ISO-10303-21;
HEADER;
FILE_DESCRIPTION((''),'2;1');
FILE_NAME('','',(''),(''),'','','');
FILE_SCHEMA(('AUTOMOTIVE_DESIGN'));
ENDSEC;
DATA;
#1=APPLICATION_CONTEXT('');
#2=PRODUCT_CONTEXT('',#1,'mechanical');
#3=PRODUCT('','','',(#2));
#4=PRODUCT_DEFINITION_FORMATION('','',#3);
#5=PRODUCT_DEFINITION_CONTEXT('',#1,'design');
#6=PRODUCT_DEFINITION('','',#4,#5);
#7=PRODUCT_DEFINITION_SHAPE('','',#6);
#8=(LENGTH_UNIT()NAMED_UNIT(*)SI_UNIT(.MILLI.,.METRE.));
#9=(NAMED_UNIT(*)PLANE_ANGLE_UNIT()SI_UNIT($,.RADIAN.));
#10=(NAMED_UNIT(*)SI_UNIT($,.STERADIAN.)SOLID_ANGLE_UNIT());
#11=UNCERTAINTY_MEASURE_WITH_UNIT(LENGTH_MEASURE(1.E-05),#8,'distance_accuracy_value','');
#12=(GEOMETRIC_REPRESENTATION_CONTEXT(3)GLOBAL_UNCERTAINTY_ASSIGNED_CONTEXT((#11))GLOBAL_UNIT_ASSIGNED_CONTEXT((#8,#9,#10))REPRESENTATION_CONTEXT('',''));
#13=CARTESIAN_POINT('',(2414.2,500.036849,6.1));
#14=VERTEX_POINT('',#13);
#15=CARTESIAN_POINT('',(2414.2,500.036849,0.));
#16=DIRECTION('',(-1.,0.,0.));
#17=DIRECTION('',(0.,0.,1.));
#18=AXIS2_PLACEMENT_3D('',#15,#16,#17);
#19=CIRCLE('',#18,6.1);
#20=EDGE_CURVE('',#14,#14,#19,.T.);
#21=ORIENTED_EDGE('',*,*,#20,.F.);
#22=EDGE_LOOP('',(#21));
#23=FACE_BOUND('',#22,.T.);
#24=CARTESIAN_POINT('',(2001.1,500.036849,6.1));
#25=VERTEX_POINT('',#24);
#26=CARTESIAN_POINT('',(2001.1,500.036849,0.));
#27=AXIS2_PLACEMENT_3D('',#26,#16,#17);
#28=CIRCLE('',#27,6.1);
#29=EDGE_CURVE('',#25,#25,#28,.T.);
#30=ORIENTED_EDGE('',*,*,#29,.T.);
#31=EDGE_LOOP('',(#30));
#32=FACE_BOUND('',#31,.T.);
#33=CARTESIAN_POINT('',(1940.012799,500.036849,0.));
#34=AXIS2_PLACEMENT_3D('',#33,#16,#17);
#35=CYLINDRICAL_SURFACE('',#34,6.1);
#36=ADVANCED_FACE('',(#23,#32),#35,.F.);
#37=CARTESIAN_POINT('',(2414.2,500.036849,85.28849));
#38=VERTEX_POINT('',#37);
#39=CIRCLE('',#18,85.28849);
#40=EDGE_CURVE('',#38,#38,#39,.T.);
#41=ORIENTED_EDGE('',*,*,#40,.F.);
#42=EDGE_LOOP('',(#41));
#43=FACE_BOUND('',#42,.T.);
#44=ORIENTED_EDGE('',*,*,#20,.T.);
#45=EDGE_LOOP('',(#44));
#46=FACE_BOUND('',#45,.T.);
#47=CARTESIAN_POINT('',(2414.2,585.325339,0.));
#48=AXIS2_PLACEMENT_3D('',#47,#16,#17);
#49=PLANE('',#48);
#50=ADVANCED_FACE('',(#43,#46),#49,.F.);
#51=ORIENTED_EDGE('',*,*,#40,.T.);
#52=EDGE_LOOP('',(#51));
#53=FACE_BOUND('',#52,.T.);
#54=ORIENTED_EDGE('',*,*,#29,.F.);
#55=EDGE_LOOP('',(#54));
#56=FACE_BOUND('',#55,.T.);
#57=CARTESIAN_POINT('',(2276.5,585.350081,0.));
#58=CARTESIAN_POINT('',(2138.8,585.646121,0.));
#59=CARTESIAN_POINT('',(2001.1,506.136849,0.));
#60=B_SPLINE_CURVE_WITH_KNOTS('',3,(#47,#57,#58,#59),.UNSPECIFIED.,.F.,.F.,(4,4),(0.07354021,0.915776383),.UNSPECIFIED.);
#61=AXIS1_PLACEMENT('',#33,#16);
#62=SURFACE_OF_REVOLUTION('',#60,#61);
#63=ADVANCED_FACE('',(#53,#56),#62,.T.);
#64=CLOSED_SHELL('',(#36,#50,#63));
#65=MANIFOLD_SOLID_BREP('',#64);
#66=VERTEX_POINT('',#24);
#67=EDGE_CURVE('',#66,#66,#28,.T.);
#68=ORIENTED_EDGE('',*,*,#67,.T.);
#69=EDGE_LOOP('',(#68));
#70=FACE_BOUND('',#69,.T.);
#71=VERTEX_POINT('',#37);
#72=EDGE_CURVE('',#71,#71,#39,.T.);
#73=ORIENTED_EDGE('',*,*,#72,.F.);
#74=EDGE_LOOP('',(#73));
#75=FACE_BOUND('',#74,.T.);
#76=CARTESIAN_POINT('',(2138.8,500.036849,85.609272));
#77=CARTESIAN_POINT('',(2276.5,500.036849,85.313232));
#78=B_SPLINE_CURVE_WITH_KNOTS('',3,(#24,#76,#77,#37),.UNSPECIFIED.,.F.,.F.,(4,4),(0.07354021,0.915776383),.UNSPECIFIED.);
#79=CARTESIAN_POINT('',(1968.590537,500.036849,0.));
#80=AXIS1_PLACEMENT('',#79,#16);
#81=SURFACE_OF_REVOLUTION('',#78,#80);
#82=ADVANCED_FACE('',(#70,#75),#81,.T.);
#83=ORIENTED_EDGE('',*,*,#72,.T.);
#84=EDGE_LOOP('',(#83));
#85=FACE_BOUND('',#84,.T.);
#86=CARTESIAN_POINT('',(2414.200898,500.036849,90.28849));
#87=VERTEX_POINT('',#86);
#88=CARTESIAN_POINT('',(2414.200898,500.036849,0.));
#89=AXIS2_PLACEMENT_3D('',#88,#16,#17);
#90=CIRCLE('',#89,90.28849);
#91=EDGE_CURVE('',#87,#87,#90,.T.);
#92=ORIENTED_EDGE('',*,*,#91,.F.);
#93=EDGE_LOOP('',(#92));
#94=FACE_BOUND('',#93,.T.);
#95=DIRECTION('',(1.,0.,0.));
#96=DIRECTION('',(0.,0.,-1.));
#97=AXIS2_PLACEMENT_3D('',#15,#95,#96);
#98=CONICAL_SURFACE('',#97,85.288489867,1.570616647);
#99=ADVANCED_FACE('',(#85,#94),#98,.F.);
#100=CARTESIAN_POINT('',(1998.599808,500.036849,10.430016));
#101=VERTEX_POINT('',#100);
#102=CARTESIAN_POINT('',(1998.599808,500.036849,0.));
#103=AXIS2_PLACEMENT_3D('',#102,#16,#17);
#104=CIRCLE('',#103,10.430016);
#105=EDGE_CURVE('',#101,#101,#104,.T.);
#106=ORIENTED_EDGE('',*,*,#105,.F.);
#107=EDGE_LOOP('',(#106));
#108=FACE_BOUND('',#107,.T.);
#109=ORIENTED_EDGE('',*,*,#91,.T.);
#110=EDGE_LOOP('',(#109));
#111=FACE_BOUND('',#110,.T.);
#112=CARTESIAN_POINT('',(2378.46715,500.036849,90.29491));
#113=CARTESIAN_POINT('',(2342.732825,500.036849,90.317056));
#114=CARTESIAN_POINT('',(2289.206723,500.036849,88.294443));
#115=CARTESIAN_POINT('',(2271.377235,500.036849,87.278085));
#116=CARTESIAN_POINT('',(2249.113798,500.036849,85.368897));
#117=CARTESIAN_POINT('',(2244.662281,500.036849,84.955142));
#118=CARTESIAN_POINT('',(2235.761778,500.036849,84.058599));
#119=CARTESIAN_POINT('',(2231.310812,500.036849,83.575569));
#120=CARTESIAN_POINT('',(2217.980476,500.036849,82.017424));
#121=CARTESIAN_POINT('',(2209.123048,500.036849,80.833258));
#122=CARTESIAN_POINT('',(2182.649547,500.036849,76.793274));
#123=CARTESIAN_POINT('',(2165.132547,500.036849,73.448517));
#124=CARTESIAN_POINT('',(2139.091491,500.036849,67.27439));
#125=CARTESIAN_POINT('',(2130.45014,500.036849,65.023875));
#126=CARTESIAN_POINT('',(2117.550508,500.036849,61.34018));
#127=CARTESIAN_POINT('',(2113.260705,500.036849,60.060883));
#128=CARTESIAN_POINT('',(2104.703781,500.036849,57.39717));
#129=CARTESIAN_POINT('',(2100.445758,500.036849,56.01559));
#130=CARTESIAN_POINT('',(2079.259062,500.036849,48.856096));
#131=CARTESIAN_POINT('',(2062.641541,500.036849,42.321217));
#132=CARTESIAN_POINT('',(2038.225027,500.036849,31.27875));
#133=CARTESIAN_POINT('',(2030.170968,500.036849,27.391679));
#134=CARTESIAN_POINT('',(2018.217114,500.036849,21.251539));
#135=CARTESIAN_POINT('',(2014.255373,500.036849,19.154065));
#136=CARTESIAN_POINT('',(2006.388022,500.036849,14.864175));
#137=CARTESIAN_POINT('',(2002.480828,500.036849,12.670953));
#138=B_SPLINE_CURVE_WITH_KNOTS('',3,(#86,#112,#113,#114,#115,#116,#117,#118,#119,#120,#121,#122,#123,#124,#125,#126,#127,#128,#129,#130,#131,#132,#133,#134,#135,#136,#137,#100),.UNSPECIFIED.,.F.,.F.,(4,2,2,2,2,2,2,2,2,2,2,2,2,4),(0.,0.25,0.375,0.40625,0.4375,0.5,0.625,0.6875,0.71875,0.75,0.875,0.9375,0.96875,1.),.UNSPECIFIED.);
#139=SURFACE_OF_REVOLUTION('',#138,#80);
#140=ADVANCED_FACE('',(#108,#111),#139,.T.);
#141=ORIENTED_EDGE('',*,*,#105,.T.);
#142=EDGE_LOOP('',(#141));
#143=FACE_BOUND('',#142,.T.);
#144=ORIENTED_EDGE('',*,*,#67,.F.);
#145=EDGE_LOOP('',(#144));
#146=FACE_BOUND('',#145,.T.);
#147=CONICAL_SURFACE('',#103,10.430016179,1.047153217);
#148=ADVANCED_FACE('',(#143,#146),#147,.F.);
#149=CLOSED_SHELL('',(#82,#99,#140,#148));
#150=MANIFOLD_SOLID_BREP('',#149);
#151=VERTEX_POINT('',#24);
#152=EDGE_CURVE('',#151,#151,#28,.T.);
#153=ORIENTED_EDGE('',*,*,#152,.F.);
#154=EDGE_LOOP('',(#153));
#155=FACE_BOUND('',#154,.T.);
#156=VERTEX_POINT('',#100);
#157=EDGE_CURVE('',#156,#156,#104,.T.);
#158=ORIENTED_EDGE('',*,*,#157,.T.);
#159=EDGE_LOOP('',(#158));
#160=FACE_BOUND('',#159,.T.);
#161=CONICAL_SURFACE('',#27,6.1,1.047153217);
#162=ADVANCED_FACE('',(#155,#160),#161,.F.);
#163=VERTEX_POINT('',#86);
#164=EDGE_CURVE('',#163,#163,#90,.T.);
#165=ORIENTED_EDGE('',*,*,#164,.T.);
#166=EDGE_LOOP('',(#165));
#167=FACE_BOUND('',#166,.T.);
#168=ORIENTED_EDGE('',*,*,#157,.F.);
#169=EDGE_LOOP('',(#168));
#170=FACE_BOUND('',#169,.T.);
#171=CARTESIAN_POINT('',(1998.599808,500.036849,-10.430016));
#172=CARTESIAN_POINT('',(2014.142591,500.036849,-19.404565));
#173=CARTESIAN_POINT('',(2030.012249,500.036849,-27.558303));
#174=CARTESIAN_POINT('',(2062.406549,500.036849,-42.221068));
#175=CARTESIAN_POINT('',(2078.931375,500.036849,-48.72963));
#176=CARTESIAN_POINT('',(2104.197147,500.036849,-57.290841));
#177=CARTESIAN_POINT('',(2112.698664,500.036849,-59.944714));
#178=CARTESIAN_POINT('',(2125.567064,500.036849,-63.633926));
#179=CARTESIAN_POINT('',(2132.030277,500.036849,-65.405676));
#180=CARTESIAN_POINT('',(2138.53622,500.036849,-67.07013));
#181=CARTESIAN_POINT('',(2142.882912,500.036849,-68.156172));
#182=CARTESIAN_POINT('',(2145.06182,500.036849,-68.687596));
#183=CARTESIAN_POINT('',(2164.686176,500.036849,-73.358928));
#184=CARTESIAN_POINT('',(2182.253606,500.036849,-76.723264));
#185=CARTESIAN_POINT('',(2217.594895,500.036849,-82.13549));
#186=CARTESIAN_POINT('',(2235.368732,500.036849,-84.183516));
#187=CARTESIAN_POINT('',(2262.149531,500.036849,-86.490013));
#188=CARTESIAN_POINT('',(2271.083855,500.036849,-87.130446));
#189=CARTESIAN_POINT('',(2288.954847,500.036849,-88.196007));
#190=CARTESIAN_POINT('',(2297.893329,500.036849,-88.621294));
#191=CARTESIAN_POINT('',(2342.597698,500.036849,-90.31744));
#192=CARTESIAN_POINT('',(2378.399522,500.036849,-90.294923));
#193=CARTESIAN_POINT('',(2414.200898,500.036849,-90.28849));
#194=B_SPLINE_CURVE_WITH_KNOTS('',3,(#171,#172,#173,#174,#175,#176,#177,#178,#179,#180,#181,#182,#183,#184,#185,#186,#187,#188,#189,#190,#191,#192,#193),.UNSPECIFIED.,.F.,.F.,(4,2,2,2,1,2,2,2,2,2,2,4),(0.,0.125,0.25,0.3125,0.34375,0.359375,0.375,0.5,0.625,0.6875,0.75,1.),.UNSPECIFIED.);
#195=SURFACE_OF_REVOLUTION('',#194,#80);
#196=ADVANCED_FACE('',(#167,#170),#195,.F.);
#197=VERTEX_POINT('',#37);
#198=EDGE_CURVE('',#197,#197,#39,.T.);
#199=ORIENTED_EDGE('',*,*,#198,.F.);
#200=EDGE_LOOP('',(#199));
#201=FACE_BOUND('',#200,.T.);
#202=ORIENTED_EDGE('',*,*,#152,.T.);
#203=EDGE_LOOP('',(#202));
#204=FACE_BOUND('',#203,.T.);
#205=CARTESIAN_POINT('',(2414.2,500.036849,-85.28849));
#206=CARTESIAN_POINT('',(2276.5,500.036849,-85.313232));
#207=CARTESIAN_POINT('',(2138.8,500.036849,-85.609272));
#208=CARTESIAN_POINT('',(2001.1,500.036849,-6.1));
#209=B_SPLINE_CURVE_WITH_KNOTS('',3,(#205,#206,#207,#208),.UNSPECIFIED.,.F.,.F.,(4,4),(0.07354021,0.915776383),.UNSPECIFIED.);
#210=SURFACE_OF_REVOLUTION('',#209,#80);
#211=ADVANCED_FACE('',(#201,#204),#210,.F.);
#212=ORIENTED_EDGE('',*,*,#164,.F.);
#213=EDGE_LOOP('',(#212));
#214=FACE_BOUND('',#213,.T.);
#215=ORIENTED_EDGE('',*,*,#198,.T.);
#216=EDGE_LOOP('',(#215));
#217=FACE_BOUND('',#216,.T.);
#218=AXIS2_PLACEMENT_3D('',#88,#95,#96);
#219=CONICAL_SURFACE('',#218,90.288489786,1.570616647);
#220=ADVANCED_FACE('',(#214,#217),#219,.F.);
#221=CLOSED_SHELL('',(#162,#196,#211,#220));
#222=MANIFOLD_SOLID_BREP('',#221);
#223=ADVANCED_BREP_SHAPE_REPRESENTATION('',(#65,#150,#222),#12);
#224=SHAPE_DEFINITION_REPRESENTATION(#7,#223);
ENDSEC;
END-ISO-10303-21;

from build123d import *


# Read off the part's stored shape, not the designer's step: Rivoluzione2
with BuildPart() as part:
    # Schizzo3 → Rivoluzione1 (revolve)
    with BuildSketch(Plane.XY, mode=Mode.PRIVATE) as rivoluzione1_sk:
        with BuildLine():
            Line((2001.1, 506.136849405), (2414.2, 506.136849405))
            Line((2414.2, 506.136849405), (2414.2, 585.325339272))
            add(Edge.make_bspline(
                [(2001.1, 506.136849405), (2138.8, 585.646121488), (2276.5, 585.350081122), (2414.2, 585.325339272)],
                knots=[0.07354021, 0.07354021, 0.07354021, 0.07354021, 0.915776383, 0.915776383, 0.915776383, 0.915776383], degree=3))
        make_face()
    revolve(rivoluzione1_sk.sketch.rotate(Axis((1940.012799463, 500.036849405, 0), (1, 0, 0)), 90), axis=Axis((1940.012799463, 500.036849405, 0), (1, 0, 0)))


with BuildPart() as body_2:
    # Rivoluzione2 outline → Rivoluzione2 (revolve)
    with BuildSketch(Plane(origin=(0, 500.036849405, 0), x_dir=(0, 1, 0), z_dir=(0, 0, -1))):
        with BuildLine():
            Line((10.430016179, 2001.1), (10.430016179, 1998.599808029))
            add(Edge.make_bspline(
                [(10.430016179, 1998.599808029), (10.910686173, 1999.432267647), (11.389001598, 2000.265664939), (11.864962214, 2001.1)],
                knots=[0, 0, 0, 0, 0.006694905, 0.006694905, 0.006694905, 0.006694905], degree=3))
            Line((11.864962214, 2001.1), (10.430016179, 2001.1))
        make_face()
        Polygon((6.1, 2001.1), (10.430016179, 1998.599808029), (10.430016179, 2001.1), align=None)
        with BuildLine():
            Line((10.430016179, 2001.1), (11.864962214, 2001.1))
            add(Edge.make_bspline(
                [(11.864962214, 2001.1), (20.275621705, 2015.843463757), (27.950965963, 2030.879756216), (42.221068159, 2062.406548595), (48.729629696, 2078.931374991), (57.290840825, 2104.197146895), (59.944713987, 2112.698663775), (63.633925586, 2125.567063857), (65.405676356, 2132.030277364), (67.07013029, 2138.53622029), (68.156172047, 2142.882911625), (68.687595735, 2145.061820389), (73.358927674, 2164.686176447), (76.723264297, 2182.253606336), (81.889168192, 2215.986438927), (83.805224005, 2232.133888963), (85.288489867, 2248.349203732)],
                knots=[0.006694905, 0.006694905, 0.006694905, 0.006694905, 0.125, 0.125, 0.25, 0.25, 0.3125, 0.3125, 0.34375, 0.359375, 0.359375, 0.375, 0.375, 0.5, 0.5, 0.613621976, 0.613621976, 0.613621976, 0.613621976], degree=3))
            Line((85.288489867, 2248.349203732), (85.288489867, 2399.349565938))
            add(Edge.make_bspline(
                [(85.288489867, 2399.349565938), (85.232478335, 2269.146372295), (82.845286707, 2138.943178652), (10.430016179, 2008.739985009)],
                knots=[0.103817559, 0.103817559, 0.103817559, 0.103817559, 0.900199835, 0.900199835, 0.900199835, 0.900199835], degree=3))
            Line((10.430016179, 2008.739985009), (10.430016179, 2001.1))
        make_face()
        with BuildLine():
            add(Edge.make_bspline(
                [(10.430016179, 2008.739985009), (9.013636222, 2006.19332334), (7.570466344, 2003.64666167), (6.1, 2001.1)],
                knots=[0.900199835, 0.900199835, 0.900199835, 0.900199835, 0.915776383, 0.915776383, 0.915776383, 0.915776383], degree=3))
            Line((6.1, 2001.1), (10.430016179, 2001.1))
            Line((10.430016179, 2001.1), (10.430016179, 2008.739985009))
        make_face()
        with BuildLine():
            Line((85.288489867, 2399.349565938), (85.288489867, 2248.349203732))
            add(Edge.make_bspline(
                [(85.288489867, 2248.349203732), (85.437023057, 2249.972993834), (85.581216282, 2251.597464474), (86.490013213, 2262.149531122), (87.130446278, 2271.083855348), (88.19600693, 2288.954846707), (88.621294249, 2297.893329192), (90.132697646, 2337.728557137), (90.27548417, 2368.651513992), (90.288489786, 2399.578076944)],
                knots=[0.613621976, 0.613621976, 0.613621976, 0.613621976, 0.625, 0.625, 0.6875, 0.6875, 0.75, 0.75, 0.965962914, 0.965962914, 0.965962914, 0.965962914], degree=3))
            Line((90.288489786, 2399.578076944), (90.288489786, 2414.2))
            Line((90.288489786, 2414.2), (85.288489867, 2414.2))
            add(Edge.make_bspline(
                [(85.288489867, 2414.2), (85.289379306, 2409.249855313), (85.290619348, 2404.299710625), (85.288489867, 2399.349565938)],
                knots=[0.07354021, 0.07354021, 0.07354021, 0.07354021, 0.103817559, 0.103817559, 0.103817559, 0.103817559], degree=3))
        make_face()
        with BuildLine():
            Line((90.288489948, 2414.2), (90.288489786, 2399.578076944))
            add(Edge.make_bspline(
                [(90.288489786, 2399.578076944), (90.289329236, 2401.574237753), (90.289628008, 2403.570413584), (90.289628007, 2405.566597718)],
                knots=[0.965962914, 0.965962914, 0.965962914, 0.965962914, 0.979902281, 0.979902281, 0.979902281, 0.979902281], degree=3))
            add(Edge.make_bspline(
                [(90.289628007, 2405.566597718), (90.289628006, 2408.444387938), (90.289007052, 2411.322195412), (90.288489948, 2414.2)],
                knots=[0.979902281, 0.979902281, 0.979902281, 0.979902281, 0.999997909, 0.999997909, 0.999997909, 0.999997909], degree=3))
        make_face()
        with BuildLine():
            Line((85.288489867, 2414.2), (90.288489948, 2414.2))
            add(Edge.make_bspline(
                [(90.288489948, 2414.2), (90.288489894, 2414.200299466), (90.28848984, 2414.200598931), (90.288489786, 2414.200898397)],
                knots=[0.999997909, 0.999997909, 0.999997909, 0.999997909, 1, 1, 1, 1], degree=3))
            Line((90.288489786, 2414.200898397), (85.288489867, 2414.2))
        make_face()
    revolve(axis=Axis((0, 500.036849405, 0), (1, 0, 0)))


with BuildPart() as body_3:
    # Rivoluzione2 2 outline → Rivoluzione2 2 (revolve)
    with BuildSketch(Plane(origin=(0, 500.036849405, 0), x_dir=(0, 1, 0), z_dir=(0, 0, -1))):
        with BuildLine():
            add(Edge.make_bspline(
                [(90.288489786, 2414.200898397), (90.28848984, 2414.200598931), (90.288489894, 2414.200299466), (90.288489948, 2414.2)],
                knots=[0, 0, 0, 0, 2.095e-06, 2.095e-06, 2.095e-06, 2.095e-06], degree=3))
            Line((90.288489786, 2414.200898397), (85.288489867, 2414.2))
            Line((85.288489867, 2414.2), (90.288489948, 2414.2))
        make_face()
        with BuildLine():
            Line((90.288489786, 2399.609616402), (90.288489786, 2414.2))
            Line((90.288489786, 2414.2), (85.288489867, 2414.2))
            add(Edge.make_bspline(
                [(85.288489867, 2399.349565938), (85.290619348, 2404.299710625), (85.289379306, 2409.249855313), (85.288489867, 2414.2)],
                knots=[0.885499034, 0.885499034, 0.885499034, 0.885499034, 0.915776383, 0.915776383, 0.915776383, 0.915776383], degree=3))
            Line((85.288489867, 2399.349565938), (85.288489867, 2248.34889085))
            add(Edge.make_bspline(
                [(90.288489786, 2399.609616402), (90.275547382, 2368.740338676), (90.133521233, 2337.875794332), (88.294442963, 2289.206722838), (87.278084723, 2271.377235271), (85.601575112, 2251.827106665), (85.447545189, 2250.087906619), (85.288489867, 2248.34889085)],
                knots=[0.034028005, 0.034028005, 0.034028005, 0.034028005, 0.25, 0.25, 0.375, 0.375, 0.387207365, 0.387207365, 0.387207365, 0.387207365], degree=3))
        make_face()
        with BuildLine():
            add(Edge.make_bspline(
                [(90.288489948, 2414.2), (90.289005731, 2411.329540524), (90.289622909, 2408.459077331), (90.289622909, 2405.588636768)],
                knots=[2.095e-06, 2.095e-06, 2.095e-06, 2.095e-06, 0.020084367, 0.020084367, 0.020084367, 0.020084367], degree=3))
            Line((90.288489948, 2414.2), (90.288489786, 2399.609616402))
            add(Edge.make_bspline(
                [(90.289622909, 2405.588636768), (90.28962291, 2403.595616129), (90.289325377, 2401.602606401), (90.288489786, 2399.609616402)],
                knots=[0.020084367, 0.020084367, 0.020084367, 0.020084367, 0.034028005, 0.034028005, 0.034028005, 0.034028005], degree=3))
        make_face()
        with BuildLine():
            Line((85.288489867, 2248.34889085), (85.288489867, 2399.349565938))
            add(Edge.make_bspline(
                [(10.430016179, 2008.739985009), (82.845286707, 2138.943178652), (85.232478335, 2269.146372295), (85.288489867, 2399.349565938)],
                knots=[0.089116757, 0.089116757, 0.089116757, 0.089116757, 0.885499034, 0.885499034, 0.885499034, 0.885499034], degree=3))
            Line((10.430016179, 2008.739985009), (10.430016179, 2001.1))
            Line((10.430016179, 2001.1), (11.864976895, 2001.1))
            add(Edge.make_bspline(
                [(85.288489867, 2248.34889085), (85.040374706, 2245.636148064), (84.78003083, 2242.923853692), (84.058599338, 2235.761777857), (83.575568737, 2231.310811525), (82.017423875, 2217.98047571), (80.833258443, 2209.123048289), (76.793274392, 2182.649546593), (73.448516674, 2165.132546976), (67.274389936, 2139.09149066), (65.02387541, 2130.450139579), (61.34017978, 2117.550508147), (60.060883425, 2113.260704665), (57.397170041, 2104.703780942), (56.015589524, 2100.445758205), (48.856095954, 2079.259061737), (42.321217141, 2062.641541011), (31.278750314, 2038.225026659), (27.391678667, 2030.170967954), (21.251538977, 2018.217114026), (19.154065321, 2014.255372524), (15.324108018, 2007.231505173), (13.609302813, 2004.157655932), (11.864976895, 2001.1)],
                knots=[0.387207365, 0.387207365, 0.387207365, 0.387207365, 0.40625, 0.40625, 0.4375, 0.4375, 0.5, 0.5, 0.625, 0.625, 0.6875, 0.6875, 0.71875, 0.71875, 0.75, 0.75, 0.875, 0.875, 0.9375, 0.9375, 0.96875, 0.96875, 0.993299177, 0.993299177, 0.993299177, 0.993299177], degree=3))
        make_face()
        with BuildLine():
            Line((10.430016179, 2001.1), (10.430016179, 2008.739985009))
            add(Edge.make_bspline(
                [(6.1, 2001.1), (7.570466344, 2003.64666167), (9.013636222, 2006.19332334), (10.430016179, 2008.739985009)],
                knots=[0.07354021, 0.07354021, 0.07354021, 0.07354021, 0.089116757, 0.089116757, 0.089116757, 0.089116757], degree=3))
            Line((6.1, 2001.1), (10.430016179, 2001.1))
        make_face()
        with BuildLine():
            add(Edge.make_bspline(
                [(11.864976895, 2001.1), (11.388854237, 2000.265397214), (10.910532153, 1999.432000902), (10.430016179, 1998.599808029)],
                knots=[0.993299177, 0.993299177, 0.993299177, 0.993299177, 1, 1, 1, 1], degree=3))
            Line((11.864976895, 2001.1), (10.430016179, 2001.1))
            Line((10.430016179, 2001.1), (10.430016179, 1998.599808029))
        make_face()
        Polygon((10.430016179, 2001.1), (6.1, 2001.1), (10.430016179, 1998.599808029), align=None)
    revolve(axis=Axis((0, 500.036849405, 0), (1, 0, 0)))


solid = Compound([part.part, body_2.part, body_3.part])
